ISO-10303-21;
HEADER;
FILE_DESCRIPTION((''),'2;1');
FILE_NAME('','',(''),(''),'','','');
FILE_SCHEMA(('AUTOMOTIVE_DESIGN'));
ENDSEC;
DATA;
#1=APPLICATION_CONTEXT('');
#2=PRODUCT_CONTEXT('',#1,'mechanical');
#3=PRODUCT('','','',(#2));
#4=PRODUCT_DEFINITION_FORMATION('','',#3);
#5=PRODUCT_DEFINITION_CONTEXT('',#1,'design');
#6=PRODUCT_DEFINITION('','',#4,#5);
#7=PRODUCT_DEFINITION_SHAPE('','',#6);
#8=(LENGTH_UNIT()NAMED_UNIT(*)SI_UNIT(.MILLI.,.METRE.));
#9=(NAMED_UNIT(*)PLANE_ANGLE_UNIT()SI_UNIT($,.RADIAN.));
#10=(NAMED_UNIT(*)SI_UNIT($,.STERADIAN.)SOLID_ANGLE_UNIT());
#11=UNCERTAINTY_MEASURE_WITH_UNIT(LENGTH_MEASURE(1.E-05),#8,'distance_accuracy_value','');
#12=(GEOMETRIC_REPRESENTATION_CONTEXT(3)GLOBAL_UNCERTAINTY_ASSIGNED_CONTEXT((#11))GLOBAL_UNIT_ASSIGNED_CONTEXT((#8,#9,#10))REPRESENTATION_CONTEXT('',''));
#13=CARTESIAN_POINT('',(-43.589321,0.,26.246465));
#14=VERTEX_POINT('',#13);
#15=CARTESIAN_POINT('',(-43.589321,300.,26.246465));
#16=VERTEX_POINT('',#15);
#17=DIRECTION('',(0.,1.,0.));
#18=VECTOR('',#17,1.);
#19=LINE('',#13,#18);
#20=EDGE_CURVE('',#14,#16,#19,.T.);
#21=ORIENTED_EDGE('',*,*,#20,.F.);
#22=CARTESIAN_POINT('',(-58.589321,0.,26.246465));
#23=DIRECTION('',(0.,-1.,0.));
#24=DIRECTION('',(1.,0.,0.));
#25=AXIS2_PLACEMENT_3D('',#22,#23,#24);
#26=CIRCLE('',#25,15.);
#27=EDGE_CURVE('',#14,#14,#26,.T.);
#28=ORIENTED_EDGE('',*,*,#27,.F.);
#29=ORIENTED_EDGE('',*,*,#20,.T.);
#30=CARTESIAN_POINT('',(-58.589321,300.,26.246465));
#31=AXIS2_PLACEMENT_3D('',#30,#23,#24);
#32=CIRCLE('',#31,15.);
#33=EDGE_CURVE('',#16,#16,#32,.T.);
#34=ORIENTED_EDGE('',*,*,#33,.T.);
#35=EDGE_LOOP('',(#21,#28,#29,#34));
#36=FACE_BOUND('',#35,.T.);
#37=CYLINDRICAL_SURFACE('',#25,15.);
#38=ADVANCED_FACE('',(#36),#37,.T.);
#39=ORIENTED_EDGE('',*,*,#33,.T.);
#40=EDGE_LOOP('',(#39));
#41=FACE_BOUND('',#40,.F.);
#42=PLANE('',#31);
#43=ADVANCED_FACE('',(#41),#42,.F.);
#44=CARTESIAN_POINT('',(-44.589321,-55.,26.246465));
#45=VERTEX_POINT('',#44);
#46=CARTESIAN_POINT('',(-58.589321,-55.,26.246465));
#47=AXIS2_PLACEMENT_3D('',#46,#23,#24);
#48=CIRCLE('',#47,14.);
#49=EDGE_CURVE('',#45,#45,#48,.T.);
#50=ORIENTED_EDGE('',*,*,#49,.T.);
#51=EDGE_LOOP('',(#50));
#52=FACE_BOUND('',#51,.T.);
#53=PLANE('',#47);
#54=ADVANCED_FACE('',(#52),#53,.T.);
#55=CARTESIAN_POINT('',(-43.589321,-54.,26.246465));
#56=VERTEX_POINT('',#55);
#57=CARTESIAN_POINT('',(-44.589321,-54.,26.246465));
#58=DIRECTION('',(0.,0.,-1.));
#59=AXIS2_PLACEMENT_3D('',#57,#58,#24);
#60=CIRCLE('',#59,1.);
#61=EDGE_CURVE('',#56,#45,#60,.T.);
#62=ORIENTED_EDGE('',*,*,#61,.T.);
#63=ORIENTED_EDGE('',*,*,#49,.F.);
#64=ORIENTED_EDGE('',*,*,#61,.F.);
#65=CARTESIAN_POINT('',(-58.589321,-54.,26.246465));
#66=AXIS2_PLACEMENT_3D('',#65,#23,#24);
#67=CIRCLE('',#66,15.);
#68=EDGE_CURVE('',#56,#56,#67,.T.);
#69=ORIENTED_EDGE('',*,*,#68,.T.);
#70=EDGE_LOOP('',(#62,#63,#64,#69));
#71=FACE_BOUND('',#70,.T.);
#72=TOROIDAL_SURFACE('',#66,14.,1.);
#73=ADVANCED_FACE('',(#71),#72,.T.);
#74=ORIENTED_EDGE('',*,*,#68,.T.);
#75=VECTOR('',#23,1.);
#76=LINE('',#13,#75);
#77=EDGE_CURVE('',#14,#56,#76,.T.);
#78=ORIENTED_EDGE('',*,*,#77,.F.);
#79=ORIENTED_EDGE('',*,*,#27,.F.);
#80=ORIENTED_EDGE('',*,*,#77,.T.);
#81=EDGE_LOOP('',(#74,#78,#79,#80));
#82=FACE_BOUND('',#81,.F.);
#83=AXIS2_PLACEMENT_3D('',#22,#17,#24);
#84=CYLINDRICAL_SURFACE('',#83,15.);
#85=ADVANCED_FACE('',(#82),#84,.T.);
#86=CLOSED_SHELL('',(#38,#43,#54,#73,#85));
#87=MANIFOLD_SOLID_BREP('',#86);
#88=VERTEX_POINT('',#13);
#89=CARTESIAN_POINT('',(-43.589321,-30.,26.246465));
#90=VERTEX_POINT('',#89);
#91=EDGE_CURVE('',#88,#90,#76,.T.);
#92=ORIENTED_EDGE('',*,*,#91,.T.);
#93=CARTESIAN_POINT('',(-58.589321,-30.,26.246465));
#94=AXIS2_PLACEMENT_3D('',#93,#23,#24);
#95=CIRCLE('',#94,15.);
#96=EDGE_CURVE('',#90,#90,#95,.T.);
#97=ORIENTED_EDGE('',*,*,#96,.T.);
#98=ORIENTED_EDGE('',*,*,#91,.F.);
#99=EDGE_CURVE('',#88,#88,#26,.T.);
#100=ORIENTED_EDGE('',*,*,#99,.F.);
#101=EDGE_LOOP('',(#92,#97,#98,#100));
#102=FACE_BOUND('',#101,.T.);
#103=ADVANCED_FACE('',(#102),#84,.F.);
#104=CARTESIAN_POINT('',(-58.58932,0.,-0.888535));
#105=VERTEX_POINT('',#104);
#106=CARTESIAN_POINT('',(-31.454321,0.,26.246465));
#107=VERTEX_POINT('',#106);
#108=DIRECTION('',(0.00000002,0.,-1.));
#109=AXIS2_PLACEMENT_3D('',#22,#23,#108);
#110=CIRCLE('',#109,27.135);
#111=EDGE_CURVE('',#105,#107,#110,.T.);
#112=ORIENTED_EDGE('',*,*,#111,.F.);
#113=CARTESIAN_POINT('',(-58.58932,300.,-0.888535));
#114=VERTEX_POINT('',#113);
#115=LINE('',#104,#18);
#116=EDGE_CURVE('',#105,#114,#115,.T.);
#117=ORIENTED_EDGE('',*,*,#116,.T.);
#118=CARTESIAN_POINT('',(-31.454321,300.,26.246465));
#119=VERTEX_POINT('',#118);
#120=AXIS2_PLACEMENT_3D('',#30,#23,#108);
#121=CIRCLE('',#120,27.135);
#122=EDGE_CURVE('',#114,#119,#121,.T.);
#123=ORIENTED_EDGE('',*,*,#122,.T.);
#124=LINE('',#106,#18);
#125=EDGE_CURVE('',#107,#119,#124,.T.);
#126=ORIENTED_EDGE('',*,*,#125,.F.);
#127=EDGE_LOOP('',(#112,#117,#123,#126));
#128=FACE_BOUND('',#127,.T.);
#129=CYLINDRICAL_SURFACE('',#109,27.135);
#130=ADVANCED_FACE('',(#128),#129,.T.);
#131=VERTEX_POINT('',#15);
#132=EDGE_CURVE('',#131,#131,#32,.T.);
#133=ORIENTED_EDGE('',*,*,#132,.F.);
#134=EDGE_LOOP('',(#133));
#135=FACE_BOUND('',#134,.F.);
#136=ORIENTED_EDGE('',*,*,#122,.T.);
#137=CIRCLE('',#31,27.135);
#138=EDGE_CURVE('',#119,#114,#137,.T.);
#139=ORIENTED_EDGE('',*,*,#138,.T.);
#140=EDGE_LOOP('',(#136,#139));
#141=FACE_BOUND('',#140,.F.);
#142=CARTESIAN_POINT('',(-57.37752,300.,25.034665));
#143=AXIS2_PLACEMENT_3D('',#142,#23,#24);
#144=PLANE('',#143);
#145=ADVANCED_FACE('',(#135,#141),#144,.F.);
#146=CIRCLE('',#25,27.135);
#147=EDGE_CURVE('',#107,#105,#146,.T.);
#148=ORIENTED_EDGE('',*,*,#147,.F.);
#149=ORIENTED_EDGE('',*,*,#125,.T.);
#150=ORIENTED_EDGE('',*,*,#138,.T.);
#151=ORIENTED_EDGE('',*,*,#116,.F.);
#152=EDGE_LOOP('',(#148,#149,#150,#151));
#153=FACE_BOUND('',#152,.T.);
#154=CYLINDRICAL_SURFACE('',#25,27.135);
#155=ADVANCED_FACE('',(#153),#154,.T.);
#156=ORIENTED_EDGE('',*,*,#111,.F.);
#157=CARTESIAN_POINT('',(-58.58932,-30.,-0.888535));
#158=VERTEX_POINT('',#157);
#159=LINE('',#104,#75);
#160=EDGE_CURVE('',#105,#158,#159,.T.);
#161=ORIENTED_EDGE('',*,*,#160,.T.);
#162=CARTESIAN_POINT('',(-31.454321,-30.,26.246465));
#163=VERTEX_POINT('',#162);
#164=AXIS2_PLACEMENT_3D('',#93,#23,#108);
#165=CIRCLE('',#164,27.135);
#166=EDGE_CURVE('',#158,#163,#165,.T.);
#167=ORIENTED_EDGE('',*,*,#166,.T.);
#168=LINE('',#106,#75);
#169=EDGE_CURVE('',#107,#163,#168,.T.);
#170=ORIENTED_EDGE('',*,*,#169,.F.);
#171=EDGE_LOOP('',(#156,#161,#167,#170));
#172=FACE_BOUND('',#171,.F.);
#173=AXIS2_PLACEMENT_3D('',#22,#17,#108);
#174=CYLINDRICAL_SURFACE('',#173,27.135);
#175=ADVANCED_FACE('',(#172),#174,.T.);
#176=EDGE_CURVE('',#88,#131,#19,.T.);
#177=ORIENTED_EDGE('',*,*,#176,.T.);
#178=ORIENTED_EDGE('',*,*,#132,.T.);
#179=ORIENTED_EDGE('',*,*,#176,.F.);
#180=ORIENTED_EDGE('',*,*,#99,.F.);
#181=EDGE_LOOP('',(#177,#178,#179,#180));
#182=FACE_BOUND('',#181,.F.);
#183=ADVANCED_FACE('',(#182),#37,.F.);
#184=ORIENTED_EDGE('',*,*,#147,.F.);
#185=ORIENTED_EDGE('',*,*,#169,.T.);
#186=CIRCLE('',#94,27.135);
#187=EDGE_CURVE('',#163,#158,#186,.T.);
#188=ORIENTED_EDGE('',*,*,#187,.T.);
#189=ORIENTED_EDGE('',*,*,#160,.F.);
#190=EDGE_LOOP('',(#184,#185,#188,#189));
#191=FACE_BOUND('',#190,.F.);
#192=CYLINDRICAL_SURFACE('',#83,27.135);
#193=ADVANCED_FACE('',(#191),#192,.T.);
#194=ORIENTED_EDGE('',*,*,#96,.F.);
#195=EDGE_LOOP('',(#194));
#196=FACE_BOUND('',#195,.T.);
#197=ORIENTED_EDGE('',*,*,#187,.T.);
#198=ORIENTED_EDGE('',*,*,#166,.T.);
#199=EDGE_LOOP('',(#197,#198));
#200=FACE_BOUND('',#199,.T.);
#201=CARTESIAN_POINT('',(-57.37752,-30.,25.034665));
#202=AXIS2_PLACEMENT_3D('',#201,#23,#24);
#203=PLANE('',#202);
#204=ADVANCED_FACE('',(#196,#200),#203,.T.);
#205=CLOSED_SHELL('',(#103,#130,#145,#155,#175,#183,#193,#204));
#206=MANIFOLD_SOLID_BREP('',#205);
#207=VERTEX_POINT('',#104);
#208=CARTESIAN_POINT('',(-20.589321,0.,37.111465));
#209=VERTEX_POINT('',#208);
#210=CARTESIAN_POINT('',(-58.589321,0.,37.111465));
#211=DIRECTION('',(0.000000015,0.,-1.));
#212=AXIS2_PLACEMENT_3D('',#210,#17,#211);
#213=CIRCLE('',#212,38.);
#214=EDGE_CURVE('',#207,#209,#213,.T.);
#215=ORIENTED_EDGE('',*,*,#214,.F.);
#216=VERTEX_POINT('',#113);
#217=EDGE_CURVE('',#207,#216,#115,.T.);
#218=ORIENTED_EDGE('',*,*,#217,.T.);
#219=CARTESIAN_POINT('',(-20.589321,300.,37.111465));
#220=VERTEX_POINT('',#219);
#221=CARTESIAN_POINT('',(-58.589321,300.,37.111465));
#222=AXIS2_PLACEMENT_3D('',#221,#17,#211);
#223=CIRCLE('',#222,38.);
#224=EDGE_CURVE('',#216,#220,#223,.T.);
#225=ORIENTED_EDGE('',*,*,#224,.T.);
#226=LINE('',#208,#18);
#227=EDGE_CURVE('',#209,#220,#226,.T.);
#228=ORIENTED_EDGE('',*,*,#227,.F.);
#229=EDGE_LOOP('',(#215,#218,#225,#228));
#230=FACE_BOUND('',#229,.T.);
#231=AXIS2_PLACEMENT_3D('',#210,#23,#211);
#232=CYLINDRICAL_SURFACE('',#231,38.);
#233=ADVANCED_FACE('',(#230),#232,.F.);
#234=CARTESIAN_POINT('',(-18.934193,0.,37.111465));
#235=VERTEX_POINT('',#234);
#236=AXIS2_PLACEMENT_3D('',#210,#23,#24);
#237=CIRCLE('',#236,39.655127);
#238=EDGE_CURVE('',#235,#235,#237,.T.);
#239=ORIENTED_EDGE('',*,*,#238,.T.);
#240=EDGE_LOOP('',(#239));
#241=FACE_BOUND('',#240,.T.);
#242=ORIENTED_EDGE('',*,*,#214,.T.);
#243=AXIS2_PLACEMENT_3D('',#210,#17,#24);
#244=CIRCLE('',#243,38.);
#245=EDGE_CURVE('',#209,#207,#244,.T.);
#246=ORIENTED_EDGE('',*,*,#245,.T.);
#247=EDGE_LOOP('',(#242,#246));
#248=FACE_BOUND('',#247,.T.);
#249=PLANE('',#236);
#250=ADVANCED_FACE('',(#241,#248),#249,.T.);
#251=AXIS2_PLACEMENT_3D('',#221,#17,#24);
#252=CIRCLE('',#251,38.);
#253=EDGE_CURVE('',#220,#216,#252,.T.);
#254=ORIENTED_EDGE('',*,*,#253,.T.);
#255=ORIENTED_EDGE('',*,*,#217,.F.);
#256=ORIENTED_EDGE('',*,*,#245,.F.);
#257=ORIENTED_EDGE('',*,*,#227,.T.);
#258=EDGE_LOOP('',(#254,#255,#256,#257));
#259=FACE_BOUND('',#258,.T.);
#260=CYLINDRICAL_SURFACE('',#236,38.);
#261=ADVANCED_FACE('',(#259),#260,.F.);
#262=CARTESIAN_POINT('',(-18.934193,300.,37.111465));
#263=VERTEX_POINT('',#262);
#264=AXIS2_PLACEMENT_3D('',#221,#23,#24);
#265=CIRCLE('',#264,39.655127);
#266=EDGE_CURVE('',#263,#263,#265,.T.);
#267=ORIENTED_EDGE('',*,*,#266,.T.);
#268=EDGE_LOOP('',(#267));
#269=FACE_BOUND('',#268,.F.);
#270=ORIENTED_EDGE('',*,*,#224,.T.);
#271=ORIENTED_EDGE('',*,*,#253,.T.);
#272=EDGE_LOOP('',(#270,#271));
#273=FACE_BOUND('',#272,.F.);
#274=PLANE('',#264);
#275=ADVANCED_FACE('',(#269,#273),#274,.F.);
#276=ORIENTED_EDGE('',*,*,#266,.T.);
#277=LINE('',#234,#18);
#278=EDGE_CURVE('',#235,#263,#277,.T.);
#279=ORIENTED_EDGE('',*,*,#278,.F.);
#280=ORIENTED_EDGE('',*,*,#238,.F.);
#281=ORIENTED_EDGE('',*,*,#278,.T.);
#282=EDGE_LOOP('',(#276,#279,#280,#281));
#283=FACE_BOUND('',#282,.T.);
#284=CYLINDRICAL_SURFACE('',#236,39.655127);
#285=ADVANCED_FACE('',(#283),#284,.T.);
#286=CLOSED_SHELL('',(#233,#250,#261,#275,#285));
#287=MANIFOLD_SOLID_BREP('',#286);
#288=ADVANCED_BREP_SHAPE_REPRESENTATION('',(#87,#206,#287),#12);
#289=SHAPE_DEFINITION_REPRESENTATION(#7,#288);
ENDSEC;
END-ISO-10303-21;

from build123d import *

# Parameters (mm, degrees)
F0_R          = 39.6551273515
F1_DEPTH      = 300
F0_R_2        = 15
F2_DEPTH      = 300
F2_DEPTH_BACK = 30
F3_DEPTH      = 300
F3_DEPTH_BACK = 55
F4_R          = 1


# Not quite as in the source:
# - a feature names something its author has since deleted; it is built from what else it names


with BuildPart() as f1:
    # F0 (on Front) → F1 (new body)
    with BuildSketch(Plane.XZ):
        with Locations((-58.5893206298, 37.1114652178)):
            Circle(F0_R)
        with BuildLine():
            ThreePointArc((-58.5893200762, -0.8885347822), (-85.4593785107, 63.9815227072), (-20.5893206298, 37.1114652178))
            ThreePointArc((-20.5893206298, 37.1114652178), (-31.719262749, 10.2414077285), (-58.5893200762, -0.8885347822))
        make_face(mode=Mode.SUBTRACT)
    extrude(amount=-F1_DEPTH)

    # F0 (on Front) → F2 (join, two sides)
    with BuildSketch(Plane.XZ) as f2_sk:
        with BuildLine():
            ThreePointArc((-31.4543206298, 26.2464652178), (-77.7766633331, 45.4338075296), (-58.5893200762, -0.8885347822))
            ThreePointArc((-58.5893200762, -0.8885347822), (-39.4019779266, 7.0591229061), (-31.4543206298, 26.2464652178))
        make_face()
        with Locations((-58.5893206298, 26.2464652178)):
            Circle(F0_R_2, mode=Mode.SUBTRACT)
    extrude(amount=-F2_DEPTH)
    extrude(f2_sk.sketch, amount=F2_DEPTH_BACK)


with BuildPart() as f3:
    # F0 (on Front) → F3 (new body, two sides)
    with BuildSketch(Plane.XZ) as f3_sk:
        with Locations((-58.5893206298, 26.2464652178)):
            Circle(F0_R_2)
    extrude(amount=-F3_DEPTH)
    extrude(f3_sk.sketch, amount=F3_DEPTH_BACK)

    # F4
    f4_edges = [f3.edges().sort_by_distance(p)[0] for p in [
        (-73.589321, -55, 26.246465),
    ]]
    fillet(f4_edges, radius=F4_R)


solid = Compound([f1.part, f3.part])
